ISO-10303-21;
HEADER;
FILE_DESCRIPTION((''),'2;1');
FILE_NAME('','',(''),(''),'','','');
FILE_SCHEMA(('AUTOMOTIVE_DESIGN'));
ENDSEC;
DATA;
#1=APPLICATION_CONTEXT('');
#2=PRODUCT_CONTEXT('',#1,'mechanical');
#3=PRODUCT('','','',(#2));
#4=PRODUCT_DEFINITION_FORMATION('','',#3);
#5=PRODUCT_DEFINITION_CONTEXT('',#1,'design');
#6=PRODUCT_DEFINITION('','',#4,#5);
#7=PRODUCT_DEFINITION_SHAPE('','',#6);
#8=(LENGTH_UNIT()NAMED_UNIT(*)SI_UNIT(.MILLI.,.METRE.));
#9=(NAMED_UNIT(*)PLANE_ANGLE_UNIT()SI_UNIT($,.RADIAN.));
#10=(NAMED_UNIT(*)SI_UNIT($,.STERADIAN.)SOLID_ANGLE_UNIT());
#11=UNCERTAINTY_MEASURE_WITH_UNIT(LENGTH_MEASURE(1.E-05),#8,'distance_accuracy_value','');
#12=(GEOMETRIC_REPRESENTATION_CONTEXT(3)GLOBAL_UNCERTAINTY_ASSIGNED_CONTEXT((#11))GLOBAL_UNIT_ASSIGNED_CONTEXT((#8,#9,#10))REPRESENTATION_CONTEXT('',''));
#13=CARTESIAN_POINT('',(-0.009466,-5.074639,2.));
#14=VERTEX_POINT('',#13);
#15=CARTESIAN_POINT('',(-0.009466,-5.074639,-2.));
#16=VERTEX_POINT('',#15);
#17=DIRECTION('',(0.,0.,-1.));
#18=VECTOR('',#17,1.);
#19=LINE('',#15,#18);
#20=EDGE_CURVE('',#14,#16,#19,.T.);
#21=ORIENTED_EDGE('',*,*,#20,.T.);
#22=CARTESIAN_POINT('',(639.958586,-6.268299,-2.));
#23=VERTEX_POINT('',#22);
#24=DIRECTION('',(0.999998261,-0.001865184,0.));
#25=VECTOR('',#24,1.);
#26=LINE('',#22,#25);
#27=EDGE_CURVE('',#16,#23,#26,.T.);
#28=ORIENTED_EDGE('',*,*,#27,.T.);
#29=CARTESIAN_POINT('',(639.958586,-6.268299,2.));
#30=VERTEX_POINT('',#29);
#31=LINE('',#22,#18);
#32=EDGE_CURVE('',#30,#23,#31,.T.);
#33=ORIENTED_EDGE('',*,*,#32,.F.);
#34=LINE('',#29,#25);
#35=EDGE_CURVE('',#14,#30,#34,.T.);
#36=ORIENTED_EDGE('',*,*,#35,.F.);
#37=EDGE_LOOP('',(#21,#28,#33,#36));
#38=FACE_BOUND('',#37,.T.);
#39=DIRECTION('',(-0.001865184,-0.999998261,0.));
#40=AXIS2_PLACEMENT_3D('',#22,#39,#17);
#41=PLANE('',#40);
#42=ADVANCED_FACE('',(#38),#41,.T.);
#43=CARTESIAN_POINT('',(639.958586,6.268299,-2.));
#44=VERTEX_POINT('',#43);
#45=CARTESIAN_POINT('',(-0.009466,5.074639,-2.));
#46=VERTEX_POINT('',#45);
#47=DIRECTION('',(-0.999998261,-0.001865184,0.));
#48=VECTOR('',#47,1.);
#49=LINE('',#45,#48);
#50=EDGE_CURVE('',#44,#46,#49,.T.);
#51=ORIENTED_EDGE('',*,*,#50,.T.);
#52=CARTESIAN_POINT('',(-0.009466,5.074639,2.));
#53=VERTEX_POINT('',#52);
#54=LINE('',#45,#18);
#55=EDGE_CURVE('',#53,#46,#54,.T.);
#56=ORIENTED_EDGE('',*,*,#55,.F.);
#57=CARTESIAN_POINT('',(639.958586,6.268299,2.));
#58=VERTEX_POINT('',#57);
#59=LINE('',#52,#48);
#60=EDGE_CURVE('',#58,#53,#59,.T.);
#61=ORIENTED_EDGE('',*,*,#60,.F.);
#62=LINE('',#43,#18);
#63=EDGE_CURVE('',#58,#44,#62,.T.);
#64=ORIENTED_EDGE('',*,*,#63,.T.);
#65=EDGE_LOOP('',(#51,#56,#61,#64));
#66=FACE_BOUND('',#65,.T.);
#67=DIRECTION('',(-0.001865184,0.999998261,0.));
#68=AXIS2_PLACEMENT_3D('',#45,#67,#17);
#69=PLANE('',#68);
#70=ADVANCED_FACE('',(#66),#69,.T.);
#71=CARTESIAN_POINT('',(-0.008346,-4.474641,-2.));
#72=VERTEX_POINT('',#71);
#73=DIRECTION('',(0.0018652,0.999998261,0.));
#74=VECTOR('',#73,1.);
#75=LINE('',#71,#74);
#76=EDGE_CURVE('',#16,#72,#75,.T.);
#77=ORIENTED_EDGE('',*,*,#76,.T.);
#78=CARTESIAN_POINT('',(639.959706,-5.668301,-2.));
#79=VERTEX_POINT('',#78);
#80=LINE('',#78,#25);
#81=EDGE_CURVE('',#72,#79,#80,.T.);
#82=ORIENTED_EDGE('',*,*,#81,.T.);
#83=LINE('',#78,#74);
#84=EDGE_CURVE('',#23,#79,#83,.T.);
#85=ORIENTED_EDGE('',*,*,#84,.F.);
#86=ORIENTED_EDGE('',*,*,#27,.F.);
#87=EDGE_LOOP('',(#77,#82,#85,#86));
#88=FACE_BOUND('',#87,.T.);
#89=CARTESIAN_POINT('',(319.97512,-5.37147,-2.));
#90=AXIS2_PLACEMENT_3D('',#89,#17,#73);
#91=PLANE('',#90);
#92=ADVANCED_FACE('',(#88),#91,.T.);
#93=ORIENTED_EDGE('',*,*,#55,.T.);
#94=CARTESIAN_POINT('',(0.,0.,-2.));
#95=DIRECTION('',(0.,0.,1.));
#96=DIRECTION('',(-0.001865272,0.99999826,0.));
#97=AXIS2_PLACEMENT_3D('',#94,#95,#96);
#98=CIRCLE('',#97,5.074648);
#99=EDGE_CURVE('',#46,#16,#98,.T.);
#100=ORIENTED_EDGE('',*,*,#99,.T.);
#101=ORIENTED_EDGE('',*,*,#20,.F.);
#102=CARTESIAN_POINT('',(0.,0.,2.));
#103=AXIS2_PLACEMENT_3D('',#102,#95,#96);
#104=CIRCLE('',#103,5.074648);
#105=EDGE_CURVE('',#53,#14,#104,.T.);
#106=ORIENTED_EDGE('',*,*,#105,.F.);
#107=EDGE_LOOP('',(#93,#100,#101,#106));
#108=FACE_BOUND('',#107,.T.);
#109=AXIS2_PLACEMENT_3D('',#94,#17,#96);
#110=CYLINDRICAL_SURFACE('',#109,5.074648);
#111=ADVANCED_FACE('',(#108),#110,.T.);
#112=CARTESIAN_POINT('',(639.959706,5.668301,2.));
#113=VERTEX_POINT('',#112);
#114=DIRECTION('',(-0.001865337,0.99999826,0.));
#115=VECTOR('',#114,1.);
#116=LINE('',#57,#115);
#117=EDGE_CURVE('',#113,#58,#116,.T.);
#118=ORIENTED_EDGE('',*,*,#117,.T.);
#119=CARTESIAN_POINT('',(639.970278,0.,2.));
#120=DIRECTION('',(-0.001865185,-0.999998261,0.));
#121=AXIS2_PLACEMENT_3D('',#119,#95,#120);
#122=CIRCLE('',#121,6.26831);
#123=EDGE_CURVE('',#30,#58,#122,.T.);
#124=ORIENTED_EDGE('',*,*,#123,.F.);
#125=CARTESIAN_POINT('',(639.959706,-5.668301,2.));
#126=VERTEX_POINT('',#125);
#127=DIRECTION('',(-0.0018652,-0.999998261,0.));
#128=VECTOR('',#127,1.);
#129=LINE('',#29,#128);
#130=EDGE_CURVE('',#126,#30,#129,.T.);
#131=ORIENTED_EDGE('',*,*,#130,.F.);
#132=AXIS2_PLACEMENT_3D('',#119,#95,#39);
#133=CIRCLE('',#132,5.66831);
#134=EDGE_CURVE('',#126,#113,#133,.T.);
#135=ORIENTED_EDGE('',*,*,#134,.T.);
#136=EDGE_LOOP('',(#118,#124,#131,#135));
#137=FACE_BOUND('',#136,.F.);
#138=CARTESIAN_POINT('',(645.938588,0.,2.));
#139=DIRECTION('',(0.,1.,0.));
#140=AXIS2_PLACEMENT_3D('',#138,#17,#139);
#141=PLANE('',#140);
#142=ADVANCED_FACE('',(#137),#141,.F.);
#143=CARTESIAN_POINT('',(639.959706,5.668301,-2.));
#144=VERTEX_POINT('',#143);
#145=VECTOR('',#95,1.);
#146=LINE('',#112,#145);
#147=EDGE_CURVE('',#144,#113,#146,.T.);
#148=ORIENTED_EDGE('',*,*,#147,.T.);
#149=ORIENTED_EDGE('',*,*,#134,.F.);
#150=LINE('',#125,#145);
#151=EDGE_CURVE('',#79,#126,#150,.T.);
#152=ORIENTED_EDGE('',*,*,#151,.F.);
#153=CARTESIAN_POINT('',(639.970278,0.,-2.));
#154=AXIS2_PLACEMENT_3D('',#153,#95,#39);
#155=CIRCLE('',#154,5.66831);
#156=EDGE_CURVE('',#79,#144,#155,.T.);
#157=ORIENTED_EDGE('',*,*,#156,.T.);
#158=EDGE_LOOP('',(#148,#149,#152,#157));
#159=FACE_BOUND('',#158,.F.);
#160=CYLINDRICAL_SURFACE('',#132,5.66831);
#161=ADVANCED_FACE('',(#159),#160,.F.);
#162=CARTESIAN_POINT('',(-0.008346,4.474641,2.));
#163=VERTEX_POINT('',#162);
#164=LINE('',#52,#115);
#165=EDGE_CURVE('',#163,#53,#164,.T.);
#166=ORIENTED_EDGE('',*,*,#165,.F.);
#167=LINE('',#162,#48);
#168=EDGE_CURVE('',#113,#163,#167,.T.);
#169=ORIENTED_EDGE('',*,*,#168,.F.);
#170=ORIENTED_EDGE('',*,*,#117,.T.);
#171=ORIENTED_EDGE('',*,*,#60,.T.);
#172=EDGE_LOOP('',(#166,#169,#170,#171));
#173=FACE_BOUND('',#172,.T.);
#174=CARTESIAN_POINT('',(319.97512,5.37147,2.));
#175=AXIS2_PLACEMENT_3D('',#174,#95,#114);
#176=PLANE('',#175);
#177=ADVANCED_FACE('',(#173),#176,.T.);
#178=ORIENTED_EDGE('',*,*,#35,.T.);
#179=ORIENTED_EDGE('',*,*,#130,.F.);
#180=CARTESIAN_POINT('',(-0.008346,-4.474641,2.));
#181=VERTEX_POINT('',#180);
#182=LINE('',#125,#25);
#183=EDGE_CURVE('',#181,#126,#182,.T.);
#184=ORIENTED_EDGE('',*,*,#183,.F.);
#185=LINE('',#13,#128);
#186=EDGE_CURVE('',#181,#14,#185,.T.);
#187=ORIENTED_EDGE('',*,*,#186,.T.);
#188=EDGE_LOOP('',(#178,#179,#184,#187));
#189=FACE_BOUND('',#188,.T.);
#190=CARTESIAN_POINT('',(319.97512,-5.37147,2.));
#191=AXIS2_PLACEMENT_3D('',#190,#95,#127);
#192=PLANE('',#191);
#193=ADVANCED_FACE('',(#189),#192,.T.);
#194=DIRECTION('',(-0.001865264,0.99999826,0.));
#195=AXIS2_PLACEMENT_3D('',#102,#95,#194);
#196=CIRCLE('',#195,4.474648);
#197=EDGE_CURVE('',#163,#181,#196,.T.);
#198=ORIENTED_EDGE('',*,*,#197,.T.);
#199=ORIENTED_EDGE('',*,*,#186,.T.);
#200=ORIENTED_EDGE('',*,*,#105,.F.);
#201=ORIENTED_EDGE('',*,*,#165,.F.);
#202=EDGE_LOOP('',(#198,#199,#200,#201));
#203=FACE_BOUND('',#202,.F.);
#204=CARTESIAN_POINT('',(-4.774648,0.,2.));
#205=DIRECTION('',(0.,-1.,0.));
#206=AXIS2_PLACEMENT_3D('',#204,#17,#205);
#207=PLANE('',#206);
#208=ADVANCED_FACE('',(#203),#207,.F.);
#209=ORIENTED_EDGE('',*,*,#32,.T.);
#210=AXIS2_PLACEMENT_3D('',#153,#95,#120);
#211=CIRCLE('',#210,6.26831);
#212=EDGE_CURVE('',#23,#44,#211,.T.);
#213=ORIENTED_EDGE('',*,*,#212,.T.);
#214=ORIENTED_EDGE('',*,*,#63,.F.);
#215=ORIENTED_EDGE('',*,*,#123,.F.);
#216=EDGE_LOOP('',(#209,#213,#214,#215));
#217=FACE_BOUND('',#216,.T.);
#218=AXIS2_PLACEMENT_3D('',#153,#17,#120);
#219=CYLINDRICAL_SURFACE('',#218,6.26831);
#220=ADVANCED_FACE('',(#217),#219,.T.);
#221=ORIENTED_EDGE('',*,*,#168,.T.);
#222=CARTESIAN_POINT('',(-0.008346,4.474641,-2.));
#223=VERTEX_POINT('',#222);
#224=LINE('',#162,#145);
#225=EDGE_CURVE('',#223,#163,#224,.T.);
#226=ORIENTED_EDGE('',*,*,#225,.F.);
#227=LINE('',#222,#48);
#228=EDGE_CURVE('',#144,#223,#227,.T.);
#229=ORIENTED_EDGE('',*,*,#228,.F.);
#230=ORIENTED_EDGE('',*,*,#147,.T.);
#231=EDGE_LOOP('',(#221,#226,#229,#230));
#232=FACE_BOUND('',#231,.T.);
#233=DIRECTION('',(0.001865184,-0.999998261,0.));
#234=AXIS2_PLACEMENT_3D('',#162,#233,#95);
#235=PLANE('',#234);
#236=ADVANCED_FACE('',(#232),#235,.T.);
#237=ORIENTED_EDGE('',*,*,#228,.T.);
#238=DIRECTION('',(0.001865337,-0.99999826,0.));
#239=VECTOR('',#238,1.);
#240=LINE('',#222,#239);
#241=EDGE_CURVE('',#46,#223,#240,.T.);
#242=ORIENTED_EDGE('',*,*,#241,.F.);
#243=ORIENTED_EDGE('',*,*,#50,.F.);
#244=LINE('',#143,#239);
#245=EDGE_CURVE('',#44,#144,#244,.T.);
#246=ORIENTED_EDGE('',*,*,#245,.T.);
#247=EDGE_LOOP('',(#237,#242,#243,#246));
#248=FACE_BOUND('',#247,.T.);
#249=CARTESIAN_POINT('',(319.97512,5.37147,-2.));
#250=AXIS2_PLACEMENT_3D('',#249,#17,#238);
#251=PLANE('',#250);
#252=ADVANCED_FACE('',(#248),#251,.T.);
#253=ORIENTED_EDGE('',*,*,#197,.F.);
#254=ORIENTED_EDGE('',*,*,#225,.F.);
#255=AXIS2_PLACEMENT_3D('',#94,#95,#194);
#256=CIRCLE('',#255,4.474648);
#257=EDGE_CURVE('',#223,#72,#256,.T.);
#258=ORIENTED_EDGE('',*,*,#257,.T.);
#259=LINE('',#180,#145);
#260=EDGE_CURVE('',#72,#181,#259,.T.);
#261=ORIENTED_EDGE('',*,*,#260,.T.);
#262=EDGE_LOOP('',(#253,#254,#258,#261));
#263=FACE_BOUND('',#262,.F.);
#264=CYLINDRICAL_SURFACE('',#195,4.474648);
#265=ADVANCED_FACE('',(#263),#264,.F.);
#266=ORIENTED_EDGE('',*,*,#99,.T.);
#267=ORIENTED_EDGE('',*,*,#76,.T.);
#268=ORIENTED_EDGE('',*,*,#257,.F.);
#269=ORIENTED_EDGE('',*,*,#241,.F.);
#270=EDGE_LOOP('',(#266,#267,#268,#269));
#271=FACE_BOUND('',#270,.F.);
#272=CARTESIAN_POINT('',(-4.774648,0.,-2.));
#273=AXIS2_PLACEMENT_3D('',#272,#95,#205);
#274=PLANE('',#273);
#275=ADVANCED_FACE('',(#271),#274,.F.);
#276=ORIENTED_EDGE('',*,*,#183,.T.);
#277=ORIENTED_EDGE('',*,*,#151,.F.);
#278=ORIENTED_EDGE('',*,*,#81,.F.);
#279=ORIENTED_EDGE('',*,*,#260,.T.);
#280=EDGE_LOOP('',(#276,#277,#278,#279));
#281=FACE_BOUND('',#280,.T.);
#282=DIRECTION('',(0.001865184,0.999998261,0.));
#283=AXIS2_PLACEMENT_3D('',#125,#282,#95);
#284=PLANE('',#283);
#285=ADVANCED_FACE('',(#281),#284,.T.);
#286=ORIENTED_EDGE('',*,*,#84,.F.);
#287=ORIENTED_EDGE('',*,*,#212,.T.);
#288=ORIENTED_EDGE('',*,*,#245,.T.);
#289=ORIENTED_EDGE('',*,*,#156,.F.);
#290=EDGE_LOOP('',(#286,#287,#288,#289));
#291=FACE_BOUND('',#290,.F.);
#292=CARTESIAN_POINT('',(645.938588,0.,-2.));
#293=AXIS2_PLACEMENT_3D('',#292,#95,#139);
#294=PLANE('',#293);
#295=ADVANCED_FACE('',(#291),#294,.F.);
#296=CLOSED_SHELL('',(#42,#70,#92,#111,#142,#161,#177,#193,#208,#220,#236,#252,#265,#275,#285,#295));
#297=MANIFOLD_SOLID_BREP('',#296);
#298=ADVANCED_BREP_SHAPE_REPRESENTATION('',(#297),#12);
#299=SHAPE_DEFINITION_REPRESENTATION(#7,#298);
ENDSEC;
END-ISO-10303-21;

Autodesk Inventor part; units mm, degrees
sketch "Sketch Path" plane through (0, 0, 0) normal (0, 0, 1) x (1, 0, 0)
  arc A0 (-0.008906, 4.77464) -> (-0.008906, -4.77464) centre (0, 0) ccw
  arc A1 (639.959146, -5.9683) -> (639.959146, 5.9683) centre (639.970278, 0) ccw
  line L0 (639.959146, -5.9683) -> (-0.008906, -4.77464)
  line L1 (-0.008906, 4.77464) -> (639.959146, 5.9683)
ref_plane "Cross Section Plane" through (-0.008906, -4.77464, 0) normal (0.9999983, -0.0018652, 0) x (0, 0, 1)
ref_plane "Work Plane2" through (0, 0, 0) normal (-1, 0, 0) x (0, 0, 1)
ref_plane "Work Plane3" through (639.970278, 0, 0) normal (-0.9999885, 0.0047934, 0) x (0, 0, 1)
sketch "Cross Section" plane through (-0.008906, -4.77464, 0) normal (0.9999983, -0.0018652, 0) x (0, 0, 1)
  line L0 (-2, 0.3) -> (2, 0.3)
  line L1 (2, 0.3) -> (2, -0.3)
  line L2 (2, -0.3) -> (-2, -0.3)
  line L3 (-2, -0.3) -> (-2, 0.3)
  line L4 (-2, 0) -> (2, 0) construction
  point P0 (0, 0)
  point P1 (0, 0)
  dimension "d0" = 4
  dimension "d4" = 0.3
  dimension "d5" = 0.3
sweep "Belt" add profiles "Cross Section" path "Sketch Path"
equation "\"d0\" = da_B"
equation "\"d4\" = da_a"
equation "\"d5\" = da_a2"
equation "\"da_B\" = 4"
equation "\"da_pb\" = 2.5"
equation "\"da_L\" = 1313.69278"
equation "\"da_a\" = 0.3"
equation "\"da_S\" = 1.5"
equation "\"da_Beta\" = 20deg"
equation "\"da_Ht\" = 0.7"
equation "\"da_H\" = 1.3"
equation "\"da_a2\" = 0.3"
properties part number "Synchronous Belt" material "Rubber"
